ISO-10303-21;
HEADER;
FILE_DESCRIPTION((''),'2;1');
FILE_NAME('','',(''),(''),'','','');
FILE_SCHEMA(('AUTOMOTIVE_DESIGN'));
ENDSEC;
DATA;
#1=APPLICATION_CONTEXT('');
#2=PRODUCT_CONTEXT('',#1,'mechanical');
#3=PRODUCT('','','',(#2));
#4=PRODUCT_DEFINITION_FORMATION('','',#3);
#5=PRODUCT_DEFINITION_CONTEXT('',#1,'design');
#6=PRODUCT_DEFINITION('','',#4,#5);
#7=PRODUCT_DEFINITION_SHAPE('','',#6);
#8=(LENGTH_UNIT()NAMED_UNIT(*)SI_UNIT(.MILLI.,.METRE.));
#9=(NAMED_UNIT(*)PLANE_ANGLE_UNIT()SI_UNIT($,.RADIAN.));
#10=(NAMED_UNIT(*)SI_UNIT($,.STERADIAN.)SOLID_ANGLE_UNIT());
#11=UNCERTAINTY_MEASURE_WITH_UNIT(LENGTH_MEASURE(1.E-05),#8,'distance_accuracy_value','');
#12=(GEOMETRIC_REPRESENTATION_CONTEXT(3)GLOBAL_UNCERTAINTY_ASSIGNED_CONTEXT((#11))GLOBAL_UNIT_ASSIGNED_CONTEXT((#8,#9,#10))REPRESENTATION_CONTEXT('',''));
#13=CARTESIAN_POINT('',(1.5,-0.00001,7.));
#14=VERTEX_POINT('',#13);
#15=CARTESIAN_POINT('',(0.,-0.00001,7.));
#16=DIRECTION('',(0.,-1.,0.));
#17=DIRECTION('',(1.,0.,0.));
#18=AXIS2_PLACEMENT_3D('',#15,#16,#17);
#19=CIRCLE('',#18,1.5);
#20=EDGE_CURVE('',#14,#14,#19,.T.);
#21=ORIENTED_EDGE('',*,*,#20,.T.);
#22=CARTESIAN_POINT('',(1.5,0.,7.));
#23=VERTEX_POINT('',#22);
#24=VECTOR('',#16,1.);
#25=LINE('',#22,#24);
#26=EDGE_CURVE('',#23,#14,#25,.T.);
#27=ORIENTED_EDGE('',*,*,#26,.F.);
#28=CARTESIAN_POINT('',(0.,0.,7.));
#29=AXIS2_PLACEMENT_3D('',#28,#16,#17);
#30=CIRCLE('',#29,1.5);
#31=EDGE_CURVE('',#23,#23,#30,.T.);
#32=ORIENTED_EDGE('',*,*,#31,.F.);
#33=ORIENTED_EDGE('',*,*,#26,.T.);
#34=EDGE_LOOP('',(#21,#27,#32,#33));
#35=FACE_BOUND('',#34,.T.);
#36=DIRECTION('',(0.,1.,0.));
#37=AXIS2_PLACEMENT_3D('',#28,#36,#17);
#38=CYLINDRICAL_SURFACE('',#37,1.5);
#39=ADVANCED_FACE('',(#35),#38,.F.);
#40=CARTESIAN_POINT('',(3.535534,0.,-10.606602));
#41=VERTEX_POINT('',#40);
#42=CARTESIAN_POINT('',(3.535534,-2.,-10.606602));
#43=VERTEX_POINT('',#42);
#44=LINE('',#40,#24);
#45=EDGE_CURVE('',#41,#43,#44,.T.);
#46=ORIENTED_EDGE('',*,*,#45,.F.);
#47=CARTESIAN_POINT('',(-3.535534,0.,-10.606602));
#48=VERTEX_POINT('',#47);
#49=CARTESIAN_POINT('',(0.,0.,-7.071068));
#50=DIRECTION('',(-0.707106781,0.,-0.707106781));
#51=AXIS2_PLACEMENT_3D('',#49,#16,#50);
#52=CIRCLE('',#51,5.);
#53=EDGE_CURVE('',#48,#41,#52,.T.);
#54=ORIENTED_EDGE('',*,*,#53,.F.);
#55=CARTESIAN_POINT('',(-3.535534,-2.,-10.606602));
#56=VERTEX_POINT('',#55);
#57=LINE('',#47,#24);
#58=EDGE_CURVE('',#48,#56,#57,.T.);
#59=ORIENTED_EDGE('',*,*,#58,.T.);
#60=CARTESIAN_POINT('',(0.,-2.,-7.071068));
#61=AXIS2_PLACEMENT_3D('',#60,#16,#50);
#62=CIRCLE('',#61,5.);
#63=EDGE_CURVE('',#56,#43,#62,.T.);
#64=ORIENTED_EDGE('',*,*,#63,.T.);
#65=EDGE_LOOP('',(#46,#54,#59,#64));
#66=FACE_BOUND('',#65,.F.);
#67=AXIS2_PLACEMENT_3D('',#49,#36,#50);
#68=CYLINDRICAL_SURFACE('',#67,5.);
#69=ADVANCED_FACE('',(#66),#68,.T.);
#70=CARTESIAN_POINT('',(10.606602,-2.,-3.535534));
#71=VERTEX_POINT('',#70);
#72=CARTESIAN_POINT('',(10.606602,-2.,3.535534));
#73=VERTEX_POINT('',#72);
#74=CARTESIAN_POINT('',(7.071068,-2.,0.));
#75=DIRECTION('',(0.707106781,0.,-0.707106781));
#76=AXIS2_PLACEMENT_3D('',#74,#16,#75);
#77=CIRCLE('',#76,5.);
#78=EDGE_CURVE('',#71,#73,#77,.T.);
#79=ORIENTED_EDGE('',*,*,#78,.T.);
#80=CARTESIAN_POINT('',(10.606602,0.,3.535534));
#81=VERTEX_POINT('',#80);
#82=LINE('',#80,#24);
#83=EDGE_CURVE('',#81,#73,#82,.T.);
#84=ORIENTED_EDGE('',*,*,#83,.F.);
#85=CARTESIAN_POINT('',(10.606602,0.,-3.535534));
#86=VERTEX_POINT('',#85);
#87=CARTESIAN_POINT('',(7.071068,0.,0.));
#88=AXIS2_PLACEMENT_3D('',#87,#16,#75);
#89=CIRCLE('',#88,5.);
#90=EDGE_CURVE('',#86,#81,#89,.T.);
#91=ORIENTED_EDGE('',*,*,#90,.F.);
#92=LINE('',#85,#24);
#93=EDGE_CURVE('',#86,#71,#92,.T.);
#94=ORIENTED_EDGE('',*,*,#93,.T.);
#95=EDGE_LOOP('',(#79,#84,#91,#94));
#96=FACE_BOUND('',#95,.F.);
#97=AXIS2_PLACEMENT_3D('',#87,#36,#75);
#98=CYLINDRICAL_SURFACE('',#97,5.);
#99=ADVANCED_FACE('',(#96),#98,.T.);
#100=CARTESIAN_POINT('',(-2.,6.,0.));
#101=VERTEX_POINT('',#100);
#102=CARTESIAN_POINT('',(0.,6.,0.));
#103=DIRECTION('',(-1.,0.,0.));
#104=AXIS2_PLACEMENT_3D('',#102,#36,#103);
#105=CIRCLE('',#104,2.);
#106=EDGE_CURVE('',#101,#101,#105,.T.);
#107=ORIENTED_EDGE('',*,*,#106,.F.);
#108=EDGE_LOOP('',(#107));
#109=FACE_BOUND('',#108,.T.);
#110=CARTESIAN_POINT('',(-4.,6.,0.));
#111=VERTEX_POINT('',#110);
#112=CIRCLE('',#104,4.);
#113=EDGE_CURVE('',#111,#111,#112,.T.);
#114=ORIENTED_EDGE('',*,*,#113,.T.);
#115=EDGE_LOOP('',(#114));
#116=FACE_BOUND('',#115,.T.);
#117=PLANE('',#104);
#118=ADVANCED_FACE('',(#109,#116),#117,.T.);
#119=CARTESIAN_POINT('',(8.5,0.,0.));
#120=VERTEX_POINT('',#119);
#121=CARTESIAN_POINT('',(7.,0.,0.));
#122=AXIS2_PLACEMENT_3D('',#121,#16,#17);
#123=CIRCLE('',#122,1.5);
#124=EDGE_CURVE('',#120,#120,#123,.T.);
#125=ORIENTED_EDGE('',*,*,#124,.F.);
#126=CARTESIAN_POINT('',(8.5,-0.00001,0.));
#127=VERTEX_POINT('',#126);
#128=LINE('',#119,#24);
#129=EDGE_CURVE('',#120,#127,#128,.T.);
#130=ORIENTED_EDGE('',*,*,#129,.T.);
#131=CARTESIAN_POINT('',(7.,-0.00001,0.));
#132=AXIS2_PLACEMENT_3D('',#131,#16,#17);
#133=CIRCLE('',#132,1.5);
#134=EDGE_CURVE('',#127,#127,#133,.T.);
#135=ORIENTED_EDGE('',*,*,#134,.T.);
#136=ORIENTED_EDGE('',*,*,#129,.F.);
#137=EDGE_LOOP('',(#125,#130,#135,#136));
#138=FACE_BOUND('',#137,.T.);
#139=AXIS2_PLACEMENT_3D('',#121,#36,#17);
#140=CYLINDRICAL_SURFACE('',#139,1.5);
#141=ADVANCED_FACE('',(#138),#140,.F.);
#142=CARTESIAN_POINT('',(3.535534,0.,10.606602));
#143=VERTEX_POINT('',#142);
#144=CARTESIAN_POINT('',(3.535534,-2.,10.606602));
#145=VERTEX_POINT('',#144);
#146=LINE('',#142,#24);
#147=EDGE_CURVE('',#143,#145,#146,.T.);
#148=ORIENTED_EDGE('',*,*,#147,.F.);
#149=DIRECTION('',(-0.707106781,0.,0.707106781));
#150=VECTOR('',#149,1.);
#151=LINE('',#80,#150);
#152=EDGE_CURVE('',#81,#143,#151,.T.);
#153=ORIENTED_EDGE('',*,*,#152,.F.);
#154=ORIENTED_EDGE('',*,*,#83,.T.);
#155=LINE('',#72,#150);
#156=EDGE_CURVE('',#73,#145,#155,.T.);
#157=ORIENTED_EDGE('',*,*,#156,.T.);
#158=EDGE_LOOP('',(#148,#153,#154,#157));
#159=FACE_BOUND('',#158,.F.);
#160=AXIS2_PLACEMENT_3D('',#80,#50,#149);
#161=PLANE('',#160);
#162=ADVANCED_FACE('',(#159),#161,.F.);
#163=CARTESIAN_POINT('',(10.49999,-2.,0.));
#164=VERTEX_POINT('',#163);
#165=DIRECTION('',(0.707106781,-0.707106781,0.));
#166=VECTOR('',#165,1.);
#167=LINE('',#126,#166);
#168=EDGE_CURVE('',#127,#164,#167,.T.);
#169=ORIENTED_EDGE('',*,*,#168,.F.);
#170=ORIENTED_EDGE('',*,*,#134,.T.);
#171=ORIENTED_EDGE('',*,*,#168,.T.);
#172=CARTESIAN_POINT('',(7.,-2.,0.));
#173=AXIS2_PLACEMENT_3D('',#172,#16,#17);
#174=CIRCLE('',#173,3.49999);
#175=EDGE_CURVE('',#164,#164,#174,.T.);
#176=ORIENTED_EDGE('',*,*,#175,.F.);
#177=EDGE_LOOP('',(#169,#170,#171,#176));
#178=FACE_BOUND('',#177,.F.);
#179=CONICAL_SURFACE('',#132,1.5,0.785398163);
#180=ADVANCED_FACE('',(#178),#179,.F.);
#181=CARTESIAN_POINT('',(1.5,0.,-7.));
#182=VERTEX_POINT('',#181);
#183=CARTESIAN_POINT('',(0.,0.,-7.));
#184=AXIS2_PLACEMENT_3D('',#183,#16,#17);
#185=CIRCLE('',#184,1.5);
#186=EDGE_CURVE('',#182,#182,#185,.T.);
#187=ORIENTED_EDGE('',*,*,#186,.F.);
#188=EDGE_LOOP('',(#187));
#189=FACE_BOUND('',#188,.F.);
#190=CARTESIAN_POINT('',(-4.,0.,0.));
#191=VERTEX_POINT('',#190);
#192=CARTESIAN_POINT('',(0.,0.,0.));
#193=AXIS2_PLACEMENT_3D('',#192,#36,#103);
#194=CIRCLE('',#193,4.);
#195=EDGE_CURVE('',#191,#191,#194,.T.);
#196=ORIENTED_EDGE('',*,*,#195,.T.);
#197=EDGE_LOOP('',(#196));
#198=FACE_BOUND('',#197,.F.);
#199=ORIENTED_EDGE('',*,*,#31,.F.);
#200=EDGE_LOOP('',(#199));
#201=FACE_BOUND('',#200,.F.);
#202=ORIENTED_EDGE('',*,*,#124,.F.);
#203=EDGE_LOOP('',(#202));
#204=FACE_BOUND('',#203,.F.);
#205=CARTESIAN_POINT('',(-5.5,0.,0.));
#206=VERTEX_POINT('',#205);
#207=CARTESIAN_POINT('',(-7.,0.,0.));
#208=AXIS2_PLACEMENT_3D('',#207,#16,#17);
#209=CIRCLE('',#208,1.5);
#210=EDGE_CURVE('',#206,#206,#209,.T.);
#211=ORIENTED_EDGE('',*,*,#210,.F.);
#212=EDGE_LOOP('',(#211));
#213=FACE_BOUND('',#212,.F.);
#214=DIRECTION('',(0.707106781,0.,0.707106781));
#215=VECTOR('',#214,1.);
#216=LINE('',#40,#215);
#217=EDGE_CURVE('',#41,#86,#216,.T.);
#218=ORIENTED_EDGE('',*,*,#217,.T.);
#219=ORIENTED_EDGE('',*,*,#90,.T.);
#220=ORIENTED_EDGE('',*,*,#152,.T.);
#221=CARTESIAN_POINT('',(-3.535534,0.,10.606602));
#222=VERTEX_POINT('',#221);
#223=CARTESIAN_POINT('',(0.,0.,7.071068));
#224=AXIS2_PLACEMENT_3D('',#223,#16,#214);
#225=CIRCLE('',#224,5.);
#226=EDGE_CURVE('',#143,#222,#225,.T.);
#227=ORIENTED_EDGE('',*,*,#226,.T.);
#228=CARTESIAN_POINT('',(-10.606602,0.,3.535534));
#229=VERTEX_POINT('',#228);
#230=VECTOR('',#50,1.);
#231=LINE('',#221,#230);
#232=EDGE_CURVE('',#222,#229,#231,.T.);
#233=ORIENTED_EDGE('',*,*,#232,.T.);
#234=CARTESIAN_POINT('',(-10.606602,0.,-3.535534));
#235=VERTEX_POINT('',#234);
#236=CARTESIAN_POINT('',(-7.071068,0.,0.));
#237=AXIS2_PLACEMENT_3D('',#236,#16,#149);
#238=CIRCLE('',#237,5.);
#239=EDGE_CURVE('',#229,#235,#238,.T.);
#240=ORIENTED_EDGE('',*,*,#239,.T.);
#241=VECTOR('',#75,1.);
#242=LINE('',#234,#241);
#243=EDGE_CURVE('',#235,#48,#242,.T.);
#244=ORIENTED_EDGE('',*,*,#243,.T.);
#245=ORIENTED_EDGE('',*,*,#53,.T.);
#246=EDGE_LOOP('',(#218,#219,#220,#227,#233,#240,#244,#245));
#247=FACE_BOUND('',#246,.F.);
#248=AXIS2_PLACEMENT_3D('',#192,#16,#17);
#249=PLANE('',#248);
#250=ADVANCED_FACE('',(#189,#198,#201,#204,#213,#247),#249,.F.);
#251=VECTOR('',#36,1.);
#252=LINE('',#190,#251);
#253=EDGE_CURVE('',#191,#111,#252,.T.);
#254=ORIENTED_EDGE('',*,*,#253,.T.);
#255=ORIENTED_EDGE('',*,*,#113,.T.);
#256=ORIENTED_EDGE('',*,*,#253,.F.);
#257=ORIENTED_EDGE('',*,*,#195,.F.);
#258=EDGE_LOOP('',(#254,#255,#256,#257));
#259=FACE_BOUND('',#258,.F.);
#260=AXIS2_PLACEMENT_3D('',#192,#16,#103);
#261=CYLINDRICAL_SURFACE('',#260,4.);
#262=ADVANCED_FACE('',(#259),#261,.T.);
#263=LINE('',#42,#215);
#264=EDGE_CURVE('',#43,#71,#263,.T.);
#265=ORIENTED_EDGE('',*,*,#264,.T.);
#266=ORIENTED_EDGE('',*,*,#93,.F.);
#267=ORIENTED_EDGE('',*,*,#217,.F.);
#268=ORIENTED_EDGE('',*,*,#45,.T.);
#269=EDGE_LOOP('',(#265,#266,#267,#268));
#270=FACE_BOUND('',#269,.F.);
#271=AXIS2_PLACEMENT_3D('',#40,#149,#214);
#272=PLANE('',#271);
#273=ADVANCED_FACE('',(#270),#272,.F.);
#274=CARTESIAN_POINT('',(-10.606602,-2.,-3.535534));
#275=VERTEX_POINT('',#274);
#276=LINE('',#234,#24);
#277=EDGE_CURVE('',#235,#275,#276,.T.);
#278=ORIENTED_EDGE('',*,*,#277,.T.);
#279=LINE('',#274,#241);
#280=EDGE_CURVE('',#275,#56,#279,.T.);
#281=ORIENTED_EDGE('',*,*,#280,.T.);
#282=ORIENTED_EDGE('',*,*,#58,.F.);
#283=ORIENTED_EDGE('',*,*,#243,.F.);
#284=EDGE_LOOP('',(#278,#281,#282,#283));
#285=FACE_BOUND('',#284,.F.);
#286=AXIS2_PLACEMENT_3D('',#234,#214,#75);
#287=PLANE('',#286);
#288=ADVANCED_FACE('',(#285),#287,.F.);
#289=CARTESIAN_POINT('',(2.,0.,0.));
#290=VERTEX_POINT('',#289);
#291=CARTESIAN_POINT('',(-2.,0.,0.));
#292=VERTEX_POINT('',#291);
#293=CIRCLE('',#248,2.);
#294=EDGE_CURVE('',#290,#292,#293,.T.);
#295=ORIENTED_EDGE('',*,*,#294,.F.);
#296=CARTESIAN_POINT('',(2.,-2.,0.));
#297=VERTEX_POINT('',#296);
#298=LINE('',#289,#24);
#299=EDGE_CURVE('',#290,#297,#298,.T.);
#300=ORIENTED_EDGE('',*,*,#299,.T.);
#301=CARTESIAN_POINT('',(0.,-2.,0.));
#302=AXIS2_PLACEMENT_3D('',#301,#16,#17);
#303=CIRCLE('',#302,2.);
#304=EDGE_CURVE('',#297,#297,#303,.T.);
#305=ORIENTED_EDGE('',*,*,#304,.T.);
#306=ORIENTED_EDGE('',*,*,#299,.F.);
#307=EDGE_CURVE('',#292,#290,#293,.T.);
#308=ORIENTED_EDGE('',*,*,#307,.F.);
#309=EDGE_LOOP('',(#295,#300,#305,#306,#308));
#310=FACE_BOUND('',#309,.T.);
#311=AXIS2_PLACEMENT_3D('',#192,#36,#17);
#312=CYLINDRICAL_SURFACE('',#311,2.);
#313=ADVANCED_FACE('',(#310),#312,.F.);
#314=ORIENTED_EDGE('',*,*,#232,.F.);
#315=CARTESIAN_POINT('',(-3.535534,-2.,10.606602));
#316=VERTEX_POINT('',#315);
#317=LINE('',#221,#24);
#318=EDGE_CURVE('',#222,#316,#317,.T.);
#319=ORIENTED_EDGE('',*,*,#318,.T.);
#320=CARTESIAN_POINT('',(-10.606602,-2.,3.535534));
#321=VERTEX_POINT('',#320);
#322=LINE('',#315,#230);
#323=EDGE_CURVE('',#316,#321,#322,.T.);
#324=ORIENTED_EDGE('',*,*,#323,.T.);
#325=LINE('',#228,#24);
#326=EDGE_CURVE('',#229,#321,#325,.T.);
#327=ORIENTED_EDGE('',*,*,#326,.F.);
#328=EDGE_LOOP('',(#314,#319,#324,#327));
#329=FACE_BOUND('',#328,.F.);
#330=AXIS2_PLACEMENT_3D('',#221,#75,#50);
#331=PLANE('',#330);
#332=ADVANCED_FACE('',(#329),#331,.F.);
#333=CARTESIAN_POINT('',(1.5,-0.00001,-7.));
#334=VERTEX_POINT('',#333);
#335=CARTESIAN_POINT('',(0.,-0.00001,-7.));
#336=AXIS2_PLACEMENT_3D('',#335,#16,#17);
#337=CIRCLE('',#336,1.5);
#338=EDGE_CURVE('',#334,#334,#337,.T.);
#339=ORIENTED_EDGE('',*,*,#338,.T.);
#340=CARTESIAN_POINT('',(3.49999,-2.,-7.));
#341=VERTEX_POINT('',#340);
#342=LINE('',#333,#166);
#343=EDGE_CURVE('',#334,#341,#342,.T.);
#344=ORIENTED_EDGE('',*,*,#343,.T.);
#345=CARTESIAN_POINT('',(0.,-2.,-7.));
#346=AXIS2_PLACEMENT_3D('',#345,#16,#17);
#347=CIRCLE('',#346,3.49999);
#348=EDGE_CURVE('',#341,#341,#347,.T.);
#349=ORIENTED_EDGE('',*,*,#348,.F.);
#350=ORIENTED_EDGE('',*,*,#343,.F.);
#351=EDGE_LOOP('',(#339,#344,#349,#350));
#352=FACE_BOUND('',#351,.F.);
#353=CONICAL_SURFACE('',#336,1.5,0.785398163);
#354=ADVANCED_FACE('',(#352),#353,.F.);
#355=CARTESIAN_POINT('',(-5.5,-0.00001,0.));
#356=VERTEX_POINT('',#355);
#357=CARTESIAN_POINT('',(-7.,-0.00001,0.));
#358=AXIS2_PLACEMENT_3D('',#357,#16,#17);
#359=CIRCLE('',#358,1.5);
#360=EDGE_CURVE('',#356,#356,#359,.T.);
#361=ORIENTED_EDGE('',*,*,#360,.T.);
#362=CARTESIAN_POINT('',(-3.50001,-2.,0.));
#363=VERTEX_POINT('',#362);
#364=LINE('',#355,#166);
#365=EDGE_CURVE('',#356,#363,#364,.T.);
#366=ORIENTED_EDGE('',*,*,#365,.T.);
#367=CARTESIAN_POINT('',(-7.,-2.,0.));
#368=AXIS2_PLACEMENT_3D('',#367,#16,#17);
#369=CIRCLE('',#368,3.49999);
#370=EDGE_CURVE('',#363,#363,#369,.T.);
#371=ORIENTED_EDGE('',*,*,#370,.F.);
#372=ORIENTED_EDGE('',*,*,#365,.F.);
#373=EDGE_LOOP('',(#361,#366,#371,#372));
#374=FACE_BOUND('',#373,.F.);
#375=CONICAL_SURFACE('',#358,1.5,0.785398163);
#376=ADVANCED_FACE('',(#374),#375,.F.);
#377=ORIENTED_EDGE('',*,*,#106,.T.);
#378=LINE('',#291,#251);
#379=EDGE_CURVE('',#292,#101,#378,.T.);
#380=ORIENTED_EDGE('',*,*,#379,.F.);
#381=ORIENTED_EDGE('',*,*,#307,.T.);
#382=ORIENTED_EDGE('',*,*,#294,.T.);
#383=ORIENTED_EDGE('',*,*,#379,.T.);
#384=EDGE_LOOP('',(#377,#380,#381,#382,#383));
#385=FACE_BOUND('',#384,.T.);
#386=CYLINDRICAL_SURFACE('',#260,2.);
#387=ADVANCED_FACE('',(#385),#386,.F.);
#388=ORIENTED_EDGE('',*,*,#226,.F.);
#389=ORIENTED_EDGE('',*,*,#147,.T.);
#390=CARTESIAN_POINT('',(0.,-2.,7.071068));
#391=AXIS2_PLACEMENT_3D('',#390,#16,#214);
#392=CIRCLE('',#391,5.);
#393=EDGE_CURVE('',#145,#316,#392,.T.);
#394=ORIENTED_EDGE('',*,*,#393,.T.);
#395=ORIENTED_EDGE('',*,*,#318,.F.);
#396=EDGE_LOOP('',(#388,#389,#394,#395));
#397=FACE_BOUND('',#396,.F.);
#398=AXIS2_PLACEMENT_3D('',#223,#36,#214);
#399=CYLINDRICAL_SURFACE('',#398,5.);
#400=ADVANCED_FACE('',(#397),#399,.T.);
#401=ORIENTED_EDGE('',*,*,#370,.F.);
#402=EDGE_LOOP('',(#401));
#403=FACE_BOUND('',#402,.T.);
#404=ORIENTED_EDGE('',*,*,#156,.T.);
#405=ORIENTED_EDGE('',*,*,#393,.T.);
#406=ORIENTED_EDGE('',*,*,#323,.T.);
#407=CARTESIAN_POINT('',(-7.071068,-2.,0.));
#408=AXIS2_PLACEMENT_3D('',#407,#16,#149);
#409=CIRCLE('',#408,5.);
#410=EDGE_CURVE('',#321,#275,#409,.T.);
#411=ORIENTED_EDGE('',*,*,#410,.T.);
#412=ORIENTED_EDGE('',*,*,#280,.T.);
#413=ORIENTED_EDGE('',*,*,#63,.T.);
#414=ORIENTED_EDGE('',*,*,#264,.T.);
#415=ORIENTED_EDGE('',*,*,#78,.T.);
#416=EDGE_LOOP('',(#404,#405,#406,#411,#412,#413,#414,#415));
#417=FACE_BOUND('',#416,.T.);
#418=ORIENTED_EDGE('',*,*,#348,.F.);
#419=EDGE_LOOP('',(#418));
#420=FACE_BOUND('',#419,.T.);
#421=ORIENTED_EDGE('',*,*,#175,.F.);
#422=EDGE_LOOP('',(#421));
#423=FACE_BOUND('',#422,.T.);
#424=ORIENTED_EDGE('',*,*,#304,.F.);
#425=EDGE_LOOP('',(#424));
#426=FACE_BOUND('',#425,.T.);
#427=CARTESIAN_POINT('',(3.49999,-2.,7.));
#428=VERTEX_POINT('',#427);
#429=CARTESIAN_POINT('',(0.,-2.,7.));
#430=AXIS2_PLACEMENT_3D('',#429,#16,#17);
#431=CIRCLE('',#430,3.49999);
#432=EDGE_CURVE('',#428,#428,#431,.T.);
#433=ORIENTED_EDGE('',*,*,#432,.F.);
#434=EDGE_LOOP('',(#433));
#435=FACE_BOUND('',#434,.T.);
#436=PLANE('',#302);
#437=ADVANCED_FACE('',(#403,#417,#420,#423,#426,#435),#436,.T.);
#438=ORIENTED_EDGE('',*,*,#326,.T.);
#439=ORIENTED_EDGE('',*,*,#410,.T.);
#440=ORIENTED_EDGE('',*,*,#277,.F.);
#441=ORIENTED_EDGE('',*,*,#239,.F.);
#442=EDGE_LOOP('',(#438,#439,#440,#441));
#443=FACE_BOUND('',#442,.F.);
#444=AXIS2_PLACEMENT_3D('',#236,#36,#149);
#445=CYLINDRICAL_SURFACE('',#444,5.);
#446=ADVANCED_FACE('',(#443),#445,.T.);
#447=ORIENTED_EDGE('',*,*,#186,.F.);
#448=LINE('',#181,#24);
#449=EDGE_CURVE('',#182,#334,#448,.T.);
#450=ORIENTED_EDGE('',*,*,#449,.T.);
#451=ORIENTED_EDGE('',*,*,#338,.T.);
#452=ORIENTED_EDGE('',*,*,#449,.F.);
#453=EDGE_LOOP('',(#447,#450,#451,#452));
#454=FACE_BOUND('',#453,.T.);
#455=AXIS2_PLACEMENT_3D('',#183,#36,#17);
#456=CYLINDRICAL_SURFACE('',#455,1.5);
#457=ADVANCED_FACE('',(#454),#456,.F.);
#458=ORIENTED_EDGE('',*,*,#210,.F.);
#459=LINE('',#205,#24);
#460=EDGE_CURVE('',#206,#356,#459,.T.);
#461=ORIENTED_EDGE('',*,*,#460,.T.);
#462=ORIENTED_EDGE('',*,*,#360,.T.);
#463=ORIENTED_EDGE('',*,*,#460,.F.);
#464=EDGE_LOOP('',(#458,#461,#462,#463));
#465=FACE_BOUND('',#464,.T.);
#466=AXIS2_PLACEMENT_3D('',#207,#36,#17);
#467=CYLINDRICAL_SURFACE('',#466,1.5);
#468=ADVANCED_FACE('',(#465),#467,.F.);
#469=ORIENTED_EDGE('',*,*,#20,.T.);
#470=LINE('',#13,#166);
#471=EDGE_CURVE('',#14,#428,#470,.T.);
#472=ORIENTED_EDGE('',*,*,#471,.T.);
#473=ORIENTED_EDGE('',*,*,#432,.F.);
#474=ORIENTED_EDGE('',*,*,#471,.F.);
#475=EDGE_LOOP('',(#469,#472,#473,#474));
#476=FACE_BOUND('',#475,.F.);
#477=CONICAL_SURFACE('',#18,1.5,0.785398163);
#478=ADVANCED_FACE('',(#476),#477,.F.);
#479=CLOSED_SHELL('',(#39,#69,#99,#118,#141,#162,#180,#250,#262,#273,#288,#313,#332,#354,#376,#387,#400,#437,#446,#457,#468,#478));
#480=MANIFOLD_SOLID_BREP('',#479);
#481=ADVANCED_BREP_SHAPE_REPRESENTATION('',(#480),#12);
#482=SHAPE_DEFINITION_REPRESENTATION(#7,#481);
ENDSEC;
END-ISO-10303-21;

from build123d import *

# Parameters (mm, degrees)
F0_R     = 1.5
F0_R_2   = 2
F1_DEPTH = 2
F2_SIZE  = 1.99999
F3_R     = 4
F3_R_2   = 2
F4_DEPTH = 6


# Not quite as in the source:
# - a fillet or chamfer is up to 0.001 mm smaller than in the source, because OpenCascade refuses the exact size


with BuildPart() as f1:
    # F0 (on Front) → F1 (new body)
    with BuildSketch(Plane.XZ):
        with BuildLine():
            Line((-10.6066017178, -3.5355339059), (-3.5355339059, -10.6066017178))
            ThreePointArc((-3.5355339059, -10.6066017178), (0, -12.0710678119), (3.5355339059, -10.6066017178))
            Line((3.5355339059, -10.6066017178), (10.6066017178, -3.5355339059))
            ThreePointArc((10.6066017178, -3.5355339059), (12.0710678119, 0), (10.6066017178, 3.5355339059))
            Line((10.6066017178, 3.5355339059), (3.5355339059, 10.6066017178))
            ThreePointArc((3.5355339059, 10.6066017178), (0, 12.0710678119), (-3.5355339059, 10.6066017178))
            Line((-3.5355339059, 10.6066017178), (-10.6066017178, 3.5355339059))
            ThreePointArc((-10.6066017178, 3.5355339059), (-12.0710678119, 0), (-10.6066017178, -3.5355339059))
        make_face()
        with Locations((-7, 0)):
            Circle(F0_R, mode=Mode.SUBTRACT)
        with Locations((0, -7)):
            Circle(F0_R, mode=Mode.SUBTRACT)
        Circle(F0_R_2, mode=Mode.SUBTRACT)
        with Locations((7, 0)):
            Circle(F0_R, mode=Mode.SUBTRACT)
        with Locations((0, 7)):
            Circle(F0_R, mode=Mode.SUBTRACT)
    extrude(amount=F1_DEPTH)

    # F2 (size 2 in the source; OpenCascade refuses exactly that, so slightly less here)
    f2_edges = [f1.edges().sort_by_distance(p)[0] for p in [
        (5.5, -2, 0),
        (-1.5, -2, -7),
        (-8.5, -2, 0),
        (-1.5, -2, 7),
    ]]
    chamfer(f2_edges, length=F2_SIZE)

    # F3 (on face) → F4 (join)
    with BuildSketch(Plane(origin=(0, 0, 0), x_dir=(-1, 0, 0), z_dir=(0, 1, 0))):
        Circle(F3_R)
        Circle(F3_R_2, mode=Mode.SUBTRACT)
    extrude(amount=F4_DEPTH)


solid = f1.part
